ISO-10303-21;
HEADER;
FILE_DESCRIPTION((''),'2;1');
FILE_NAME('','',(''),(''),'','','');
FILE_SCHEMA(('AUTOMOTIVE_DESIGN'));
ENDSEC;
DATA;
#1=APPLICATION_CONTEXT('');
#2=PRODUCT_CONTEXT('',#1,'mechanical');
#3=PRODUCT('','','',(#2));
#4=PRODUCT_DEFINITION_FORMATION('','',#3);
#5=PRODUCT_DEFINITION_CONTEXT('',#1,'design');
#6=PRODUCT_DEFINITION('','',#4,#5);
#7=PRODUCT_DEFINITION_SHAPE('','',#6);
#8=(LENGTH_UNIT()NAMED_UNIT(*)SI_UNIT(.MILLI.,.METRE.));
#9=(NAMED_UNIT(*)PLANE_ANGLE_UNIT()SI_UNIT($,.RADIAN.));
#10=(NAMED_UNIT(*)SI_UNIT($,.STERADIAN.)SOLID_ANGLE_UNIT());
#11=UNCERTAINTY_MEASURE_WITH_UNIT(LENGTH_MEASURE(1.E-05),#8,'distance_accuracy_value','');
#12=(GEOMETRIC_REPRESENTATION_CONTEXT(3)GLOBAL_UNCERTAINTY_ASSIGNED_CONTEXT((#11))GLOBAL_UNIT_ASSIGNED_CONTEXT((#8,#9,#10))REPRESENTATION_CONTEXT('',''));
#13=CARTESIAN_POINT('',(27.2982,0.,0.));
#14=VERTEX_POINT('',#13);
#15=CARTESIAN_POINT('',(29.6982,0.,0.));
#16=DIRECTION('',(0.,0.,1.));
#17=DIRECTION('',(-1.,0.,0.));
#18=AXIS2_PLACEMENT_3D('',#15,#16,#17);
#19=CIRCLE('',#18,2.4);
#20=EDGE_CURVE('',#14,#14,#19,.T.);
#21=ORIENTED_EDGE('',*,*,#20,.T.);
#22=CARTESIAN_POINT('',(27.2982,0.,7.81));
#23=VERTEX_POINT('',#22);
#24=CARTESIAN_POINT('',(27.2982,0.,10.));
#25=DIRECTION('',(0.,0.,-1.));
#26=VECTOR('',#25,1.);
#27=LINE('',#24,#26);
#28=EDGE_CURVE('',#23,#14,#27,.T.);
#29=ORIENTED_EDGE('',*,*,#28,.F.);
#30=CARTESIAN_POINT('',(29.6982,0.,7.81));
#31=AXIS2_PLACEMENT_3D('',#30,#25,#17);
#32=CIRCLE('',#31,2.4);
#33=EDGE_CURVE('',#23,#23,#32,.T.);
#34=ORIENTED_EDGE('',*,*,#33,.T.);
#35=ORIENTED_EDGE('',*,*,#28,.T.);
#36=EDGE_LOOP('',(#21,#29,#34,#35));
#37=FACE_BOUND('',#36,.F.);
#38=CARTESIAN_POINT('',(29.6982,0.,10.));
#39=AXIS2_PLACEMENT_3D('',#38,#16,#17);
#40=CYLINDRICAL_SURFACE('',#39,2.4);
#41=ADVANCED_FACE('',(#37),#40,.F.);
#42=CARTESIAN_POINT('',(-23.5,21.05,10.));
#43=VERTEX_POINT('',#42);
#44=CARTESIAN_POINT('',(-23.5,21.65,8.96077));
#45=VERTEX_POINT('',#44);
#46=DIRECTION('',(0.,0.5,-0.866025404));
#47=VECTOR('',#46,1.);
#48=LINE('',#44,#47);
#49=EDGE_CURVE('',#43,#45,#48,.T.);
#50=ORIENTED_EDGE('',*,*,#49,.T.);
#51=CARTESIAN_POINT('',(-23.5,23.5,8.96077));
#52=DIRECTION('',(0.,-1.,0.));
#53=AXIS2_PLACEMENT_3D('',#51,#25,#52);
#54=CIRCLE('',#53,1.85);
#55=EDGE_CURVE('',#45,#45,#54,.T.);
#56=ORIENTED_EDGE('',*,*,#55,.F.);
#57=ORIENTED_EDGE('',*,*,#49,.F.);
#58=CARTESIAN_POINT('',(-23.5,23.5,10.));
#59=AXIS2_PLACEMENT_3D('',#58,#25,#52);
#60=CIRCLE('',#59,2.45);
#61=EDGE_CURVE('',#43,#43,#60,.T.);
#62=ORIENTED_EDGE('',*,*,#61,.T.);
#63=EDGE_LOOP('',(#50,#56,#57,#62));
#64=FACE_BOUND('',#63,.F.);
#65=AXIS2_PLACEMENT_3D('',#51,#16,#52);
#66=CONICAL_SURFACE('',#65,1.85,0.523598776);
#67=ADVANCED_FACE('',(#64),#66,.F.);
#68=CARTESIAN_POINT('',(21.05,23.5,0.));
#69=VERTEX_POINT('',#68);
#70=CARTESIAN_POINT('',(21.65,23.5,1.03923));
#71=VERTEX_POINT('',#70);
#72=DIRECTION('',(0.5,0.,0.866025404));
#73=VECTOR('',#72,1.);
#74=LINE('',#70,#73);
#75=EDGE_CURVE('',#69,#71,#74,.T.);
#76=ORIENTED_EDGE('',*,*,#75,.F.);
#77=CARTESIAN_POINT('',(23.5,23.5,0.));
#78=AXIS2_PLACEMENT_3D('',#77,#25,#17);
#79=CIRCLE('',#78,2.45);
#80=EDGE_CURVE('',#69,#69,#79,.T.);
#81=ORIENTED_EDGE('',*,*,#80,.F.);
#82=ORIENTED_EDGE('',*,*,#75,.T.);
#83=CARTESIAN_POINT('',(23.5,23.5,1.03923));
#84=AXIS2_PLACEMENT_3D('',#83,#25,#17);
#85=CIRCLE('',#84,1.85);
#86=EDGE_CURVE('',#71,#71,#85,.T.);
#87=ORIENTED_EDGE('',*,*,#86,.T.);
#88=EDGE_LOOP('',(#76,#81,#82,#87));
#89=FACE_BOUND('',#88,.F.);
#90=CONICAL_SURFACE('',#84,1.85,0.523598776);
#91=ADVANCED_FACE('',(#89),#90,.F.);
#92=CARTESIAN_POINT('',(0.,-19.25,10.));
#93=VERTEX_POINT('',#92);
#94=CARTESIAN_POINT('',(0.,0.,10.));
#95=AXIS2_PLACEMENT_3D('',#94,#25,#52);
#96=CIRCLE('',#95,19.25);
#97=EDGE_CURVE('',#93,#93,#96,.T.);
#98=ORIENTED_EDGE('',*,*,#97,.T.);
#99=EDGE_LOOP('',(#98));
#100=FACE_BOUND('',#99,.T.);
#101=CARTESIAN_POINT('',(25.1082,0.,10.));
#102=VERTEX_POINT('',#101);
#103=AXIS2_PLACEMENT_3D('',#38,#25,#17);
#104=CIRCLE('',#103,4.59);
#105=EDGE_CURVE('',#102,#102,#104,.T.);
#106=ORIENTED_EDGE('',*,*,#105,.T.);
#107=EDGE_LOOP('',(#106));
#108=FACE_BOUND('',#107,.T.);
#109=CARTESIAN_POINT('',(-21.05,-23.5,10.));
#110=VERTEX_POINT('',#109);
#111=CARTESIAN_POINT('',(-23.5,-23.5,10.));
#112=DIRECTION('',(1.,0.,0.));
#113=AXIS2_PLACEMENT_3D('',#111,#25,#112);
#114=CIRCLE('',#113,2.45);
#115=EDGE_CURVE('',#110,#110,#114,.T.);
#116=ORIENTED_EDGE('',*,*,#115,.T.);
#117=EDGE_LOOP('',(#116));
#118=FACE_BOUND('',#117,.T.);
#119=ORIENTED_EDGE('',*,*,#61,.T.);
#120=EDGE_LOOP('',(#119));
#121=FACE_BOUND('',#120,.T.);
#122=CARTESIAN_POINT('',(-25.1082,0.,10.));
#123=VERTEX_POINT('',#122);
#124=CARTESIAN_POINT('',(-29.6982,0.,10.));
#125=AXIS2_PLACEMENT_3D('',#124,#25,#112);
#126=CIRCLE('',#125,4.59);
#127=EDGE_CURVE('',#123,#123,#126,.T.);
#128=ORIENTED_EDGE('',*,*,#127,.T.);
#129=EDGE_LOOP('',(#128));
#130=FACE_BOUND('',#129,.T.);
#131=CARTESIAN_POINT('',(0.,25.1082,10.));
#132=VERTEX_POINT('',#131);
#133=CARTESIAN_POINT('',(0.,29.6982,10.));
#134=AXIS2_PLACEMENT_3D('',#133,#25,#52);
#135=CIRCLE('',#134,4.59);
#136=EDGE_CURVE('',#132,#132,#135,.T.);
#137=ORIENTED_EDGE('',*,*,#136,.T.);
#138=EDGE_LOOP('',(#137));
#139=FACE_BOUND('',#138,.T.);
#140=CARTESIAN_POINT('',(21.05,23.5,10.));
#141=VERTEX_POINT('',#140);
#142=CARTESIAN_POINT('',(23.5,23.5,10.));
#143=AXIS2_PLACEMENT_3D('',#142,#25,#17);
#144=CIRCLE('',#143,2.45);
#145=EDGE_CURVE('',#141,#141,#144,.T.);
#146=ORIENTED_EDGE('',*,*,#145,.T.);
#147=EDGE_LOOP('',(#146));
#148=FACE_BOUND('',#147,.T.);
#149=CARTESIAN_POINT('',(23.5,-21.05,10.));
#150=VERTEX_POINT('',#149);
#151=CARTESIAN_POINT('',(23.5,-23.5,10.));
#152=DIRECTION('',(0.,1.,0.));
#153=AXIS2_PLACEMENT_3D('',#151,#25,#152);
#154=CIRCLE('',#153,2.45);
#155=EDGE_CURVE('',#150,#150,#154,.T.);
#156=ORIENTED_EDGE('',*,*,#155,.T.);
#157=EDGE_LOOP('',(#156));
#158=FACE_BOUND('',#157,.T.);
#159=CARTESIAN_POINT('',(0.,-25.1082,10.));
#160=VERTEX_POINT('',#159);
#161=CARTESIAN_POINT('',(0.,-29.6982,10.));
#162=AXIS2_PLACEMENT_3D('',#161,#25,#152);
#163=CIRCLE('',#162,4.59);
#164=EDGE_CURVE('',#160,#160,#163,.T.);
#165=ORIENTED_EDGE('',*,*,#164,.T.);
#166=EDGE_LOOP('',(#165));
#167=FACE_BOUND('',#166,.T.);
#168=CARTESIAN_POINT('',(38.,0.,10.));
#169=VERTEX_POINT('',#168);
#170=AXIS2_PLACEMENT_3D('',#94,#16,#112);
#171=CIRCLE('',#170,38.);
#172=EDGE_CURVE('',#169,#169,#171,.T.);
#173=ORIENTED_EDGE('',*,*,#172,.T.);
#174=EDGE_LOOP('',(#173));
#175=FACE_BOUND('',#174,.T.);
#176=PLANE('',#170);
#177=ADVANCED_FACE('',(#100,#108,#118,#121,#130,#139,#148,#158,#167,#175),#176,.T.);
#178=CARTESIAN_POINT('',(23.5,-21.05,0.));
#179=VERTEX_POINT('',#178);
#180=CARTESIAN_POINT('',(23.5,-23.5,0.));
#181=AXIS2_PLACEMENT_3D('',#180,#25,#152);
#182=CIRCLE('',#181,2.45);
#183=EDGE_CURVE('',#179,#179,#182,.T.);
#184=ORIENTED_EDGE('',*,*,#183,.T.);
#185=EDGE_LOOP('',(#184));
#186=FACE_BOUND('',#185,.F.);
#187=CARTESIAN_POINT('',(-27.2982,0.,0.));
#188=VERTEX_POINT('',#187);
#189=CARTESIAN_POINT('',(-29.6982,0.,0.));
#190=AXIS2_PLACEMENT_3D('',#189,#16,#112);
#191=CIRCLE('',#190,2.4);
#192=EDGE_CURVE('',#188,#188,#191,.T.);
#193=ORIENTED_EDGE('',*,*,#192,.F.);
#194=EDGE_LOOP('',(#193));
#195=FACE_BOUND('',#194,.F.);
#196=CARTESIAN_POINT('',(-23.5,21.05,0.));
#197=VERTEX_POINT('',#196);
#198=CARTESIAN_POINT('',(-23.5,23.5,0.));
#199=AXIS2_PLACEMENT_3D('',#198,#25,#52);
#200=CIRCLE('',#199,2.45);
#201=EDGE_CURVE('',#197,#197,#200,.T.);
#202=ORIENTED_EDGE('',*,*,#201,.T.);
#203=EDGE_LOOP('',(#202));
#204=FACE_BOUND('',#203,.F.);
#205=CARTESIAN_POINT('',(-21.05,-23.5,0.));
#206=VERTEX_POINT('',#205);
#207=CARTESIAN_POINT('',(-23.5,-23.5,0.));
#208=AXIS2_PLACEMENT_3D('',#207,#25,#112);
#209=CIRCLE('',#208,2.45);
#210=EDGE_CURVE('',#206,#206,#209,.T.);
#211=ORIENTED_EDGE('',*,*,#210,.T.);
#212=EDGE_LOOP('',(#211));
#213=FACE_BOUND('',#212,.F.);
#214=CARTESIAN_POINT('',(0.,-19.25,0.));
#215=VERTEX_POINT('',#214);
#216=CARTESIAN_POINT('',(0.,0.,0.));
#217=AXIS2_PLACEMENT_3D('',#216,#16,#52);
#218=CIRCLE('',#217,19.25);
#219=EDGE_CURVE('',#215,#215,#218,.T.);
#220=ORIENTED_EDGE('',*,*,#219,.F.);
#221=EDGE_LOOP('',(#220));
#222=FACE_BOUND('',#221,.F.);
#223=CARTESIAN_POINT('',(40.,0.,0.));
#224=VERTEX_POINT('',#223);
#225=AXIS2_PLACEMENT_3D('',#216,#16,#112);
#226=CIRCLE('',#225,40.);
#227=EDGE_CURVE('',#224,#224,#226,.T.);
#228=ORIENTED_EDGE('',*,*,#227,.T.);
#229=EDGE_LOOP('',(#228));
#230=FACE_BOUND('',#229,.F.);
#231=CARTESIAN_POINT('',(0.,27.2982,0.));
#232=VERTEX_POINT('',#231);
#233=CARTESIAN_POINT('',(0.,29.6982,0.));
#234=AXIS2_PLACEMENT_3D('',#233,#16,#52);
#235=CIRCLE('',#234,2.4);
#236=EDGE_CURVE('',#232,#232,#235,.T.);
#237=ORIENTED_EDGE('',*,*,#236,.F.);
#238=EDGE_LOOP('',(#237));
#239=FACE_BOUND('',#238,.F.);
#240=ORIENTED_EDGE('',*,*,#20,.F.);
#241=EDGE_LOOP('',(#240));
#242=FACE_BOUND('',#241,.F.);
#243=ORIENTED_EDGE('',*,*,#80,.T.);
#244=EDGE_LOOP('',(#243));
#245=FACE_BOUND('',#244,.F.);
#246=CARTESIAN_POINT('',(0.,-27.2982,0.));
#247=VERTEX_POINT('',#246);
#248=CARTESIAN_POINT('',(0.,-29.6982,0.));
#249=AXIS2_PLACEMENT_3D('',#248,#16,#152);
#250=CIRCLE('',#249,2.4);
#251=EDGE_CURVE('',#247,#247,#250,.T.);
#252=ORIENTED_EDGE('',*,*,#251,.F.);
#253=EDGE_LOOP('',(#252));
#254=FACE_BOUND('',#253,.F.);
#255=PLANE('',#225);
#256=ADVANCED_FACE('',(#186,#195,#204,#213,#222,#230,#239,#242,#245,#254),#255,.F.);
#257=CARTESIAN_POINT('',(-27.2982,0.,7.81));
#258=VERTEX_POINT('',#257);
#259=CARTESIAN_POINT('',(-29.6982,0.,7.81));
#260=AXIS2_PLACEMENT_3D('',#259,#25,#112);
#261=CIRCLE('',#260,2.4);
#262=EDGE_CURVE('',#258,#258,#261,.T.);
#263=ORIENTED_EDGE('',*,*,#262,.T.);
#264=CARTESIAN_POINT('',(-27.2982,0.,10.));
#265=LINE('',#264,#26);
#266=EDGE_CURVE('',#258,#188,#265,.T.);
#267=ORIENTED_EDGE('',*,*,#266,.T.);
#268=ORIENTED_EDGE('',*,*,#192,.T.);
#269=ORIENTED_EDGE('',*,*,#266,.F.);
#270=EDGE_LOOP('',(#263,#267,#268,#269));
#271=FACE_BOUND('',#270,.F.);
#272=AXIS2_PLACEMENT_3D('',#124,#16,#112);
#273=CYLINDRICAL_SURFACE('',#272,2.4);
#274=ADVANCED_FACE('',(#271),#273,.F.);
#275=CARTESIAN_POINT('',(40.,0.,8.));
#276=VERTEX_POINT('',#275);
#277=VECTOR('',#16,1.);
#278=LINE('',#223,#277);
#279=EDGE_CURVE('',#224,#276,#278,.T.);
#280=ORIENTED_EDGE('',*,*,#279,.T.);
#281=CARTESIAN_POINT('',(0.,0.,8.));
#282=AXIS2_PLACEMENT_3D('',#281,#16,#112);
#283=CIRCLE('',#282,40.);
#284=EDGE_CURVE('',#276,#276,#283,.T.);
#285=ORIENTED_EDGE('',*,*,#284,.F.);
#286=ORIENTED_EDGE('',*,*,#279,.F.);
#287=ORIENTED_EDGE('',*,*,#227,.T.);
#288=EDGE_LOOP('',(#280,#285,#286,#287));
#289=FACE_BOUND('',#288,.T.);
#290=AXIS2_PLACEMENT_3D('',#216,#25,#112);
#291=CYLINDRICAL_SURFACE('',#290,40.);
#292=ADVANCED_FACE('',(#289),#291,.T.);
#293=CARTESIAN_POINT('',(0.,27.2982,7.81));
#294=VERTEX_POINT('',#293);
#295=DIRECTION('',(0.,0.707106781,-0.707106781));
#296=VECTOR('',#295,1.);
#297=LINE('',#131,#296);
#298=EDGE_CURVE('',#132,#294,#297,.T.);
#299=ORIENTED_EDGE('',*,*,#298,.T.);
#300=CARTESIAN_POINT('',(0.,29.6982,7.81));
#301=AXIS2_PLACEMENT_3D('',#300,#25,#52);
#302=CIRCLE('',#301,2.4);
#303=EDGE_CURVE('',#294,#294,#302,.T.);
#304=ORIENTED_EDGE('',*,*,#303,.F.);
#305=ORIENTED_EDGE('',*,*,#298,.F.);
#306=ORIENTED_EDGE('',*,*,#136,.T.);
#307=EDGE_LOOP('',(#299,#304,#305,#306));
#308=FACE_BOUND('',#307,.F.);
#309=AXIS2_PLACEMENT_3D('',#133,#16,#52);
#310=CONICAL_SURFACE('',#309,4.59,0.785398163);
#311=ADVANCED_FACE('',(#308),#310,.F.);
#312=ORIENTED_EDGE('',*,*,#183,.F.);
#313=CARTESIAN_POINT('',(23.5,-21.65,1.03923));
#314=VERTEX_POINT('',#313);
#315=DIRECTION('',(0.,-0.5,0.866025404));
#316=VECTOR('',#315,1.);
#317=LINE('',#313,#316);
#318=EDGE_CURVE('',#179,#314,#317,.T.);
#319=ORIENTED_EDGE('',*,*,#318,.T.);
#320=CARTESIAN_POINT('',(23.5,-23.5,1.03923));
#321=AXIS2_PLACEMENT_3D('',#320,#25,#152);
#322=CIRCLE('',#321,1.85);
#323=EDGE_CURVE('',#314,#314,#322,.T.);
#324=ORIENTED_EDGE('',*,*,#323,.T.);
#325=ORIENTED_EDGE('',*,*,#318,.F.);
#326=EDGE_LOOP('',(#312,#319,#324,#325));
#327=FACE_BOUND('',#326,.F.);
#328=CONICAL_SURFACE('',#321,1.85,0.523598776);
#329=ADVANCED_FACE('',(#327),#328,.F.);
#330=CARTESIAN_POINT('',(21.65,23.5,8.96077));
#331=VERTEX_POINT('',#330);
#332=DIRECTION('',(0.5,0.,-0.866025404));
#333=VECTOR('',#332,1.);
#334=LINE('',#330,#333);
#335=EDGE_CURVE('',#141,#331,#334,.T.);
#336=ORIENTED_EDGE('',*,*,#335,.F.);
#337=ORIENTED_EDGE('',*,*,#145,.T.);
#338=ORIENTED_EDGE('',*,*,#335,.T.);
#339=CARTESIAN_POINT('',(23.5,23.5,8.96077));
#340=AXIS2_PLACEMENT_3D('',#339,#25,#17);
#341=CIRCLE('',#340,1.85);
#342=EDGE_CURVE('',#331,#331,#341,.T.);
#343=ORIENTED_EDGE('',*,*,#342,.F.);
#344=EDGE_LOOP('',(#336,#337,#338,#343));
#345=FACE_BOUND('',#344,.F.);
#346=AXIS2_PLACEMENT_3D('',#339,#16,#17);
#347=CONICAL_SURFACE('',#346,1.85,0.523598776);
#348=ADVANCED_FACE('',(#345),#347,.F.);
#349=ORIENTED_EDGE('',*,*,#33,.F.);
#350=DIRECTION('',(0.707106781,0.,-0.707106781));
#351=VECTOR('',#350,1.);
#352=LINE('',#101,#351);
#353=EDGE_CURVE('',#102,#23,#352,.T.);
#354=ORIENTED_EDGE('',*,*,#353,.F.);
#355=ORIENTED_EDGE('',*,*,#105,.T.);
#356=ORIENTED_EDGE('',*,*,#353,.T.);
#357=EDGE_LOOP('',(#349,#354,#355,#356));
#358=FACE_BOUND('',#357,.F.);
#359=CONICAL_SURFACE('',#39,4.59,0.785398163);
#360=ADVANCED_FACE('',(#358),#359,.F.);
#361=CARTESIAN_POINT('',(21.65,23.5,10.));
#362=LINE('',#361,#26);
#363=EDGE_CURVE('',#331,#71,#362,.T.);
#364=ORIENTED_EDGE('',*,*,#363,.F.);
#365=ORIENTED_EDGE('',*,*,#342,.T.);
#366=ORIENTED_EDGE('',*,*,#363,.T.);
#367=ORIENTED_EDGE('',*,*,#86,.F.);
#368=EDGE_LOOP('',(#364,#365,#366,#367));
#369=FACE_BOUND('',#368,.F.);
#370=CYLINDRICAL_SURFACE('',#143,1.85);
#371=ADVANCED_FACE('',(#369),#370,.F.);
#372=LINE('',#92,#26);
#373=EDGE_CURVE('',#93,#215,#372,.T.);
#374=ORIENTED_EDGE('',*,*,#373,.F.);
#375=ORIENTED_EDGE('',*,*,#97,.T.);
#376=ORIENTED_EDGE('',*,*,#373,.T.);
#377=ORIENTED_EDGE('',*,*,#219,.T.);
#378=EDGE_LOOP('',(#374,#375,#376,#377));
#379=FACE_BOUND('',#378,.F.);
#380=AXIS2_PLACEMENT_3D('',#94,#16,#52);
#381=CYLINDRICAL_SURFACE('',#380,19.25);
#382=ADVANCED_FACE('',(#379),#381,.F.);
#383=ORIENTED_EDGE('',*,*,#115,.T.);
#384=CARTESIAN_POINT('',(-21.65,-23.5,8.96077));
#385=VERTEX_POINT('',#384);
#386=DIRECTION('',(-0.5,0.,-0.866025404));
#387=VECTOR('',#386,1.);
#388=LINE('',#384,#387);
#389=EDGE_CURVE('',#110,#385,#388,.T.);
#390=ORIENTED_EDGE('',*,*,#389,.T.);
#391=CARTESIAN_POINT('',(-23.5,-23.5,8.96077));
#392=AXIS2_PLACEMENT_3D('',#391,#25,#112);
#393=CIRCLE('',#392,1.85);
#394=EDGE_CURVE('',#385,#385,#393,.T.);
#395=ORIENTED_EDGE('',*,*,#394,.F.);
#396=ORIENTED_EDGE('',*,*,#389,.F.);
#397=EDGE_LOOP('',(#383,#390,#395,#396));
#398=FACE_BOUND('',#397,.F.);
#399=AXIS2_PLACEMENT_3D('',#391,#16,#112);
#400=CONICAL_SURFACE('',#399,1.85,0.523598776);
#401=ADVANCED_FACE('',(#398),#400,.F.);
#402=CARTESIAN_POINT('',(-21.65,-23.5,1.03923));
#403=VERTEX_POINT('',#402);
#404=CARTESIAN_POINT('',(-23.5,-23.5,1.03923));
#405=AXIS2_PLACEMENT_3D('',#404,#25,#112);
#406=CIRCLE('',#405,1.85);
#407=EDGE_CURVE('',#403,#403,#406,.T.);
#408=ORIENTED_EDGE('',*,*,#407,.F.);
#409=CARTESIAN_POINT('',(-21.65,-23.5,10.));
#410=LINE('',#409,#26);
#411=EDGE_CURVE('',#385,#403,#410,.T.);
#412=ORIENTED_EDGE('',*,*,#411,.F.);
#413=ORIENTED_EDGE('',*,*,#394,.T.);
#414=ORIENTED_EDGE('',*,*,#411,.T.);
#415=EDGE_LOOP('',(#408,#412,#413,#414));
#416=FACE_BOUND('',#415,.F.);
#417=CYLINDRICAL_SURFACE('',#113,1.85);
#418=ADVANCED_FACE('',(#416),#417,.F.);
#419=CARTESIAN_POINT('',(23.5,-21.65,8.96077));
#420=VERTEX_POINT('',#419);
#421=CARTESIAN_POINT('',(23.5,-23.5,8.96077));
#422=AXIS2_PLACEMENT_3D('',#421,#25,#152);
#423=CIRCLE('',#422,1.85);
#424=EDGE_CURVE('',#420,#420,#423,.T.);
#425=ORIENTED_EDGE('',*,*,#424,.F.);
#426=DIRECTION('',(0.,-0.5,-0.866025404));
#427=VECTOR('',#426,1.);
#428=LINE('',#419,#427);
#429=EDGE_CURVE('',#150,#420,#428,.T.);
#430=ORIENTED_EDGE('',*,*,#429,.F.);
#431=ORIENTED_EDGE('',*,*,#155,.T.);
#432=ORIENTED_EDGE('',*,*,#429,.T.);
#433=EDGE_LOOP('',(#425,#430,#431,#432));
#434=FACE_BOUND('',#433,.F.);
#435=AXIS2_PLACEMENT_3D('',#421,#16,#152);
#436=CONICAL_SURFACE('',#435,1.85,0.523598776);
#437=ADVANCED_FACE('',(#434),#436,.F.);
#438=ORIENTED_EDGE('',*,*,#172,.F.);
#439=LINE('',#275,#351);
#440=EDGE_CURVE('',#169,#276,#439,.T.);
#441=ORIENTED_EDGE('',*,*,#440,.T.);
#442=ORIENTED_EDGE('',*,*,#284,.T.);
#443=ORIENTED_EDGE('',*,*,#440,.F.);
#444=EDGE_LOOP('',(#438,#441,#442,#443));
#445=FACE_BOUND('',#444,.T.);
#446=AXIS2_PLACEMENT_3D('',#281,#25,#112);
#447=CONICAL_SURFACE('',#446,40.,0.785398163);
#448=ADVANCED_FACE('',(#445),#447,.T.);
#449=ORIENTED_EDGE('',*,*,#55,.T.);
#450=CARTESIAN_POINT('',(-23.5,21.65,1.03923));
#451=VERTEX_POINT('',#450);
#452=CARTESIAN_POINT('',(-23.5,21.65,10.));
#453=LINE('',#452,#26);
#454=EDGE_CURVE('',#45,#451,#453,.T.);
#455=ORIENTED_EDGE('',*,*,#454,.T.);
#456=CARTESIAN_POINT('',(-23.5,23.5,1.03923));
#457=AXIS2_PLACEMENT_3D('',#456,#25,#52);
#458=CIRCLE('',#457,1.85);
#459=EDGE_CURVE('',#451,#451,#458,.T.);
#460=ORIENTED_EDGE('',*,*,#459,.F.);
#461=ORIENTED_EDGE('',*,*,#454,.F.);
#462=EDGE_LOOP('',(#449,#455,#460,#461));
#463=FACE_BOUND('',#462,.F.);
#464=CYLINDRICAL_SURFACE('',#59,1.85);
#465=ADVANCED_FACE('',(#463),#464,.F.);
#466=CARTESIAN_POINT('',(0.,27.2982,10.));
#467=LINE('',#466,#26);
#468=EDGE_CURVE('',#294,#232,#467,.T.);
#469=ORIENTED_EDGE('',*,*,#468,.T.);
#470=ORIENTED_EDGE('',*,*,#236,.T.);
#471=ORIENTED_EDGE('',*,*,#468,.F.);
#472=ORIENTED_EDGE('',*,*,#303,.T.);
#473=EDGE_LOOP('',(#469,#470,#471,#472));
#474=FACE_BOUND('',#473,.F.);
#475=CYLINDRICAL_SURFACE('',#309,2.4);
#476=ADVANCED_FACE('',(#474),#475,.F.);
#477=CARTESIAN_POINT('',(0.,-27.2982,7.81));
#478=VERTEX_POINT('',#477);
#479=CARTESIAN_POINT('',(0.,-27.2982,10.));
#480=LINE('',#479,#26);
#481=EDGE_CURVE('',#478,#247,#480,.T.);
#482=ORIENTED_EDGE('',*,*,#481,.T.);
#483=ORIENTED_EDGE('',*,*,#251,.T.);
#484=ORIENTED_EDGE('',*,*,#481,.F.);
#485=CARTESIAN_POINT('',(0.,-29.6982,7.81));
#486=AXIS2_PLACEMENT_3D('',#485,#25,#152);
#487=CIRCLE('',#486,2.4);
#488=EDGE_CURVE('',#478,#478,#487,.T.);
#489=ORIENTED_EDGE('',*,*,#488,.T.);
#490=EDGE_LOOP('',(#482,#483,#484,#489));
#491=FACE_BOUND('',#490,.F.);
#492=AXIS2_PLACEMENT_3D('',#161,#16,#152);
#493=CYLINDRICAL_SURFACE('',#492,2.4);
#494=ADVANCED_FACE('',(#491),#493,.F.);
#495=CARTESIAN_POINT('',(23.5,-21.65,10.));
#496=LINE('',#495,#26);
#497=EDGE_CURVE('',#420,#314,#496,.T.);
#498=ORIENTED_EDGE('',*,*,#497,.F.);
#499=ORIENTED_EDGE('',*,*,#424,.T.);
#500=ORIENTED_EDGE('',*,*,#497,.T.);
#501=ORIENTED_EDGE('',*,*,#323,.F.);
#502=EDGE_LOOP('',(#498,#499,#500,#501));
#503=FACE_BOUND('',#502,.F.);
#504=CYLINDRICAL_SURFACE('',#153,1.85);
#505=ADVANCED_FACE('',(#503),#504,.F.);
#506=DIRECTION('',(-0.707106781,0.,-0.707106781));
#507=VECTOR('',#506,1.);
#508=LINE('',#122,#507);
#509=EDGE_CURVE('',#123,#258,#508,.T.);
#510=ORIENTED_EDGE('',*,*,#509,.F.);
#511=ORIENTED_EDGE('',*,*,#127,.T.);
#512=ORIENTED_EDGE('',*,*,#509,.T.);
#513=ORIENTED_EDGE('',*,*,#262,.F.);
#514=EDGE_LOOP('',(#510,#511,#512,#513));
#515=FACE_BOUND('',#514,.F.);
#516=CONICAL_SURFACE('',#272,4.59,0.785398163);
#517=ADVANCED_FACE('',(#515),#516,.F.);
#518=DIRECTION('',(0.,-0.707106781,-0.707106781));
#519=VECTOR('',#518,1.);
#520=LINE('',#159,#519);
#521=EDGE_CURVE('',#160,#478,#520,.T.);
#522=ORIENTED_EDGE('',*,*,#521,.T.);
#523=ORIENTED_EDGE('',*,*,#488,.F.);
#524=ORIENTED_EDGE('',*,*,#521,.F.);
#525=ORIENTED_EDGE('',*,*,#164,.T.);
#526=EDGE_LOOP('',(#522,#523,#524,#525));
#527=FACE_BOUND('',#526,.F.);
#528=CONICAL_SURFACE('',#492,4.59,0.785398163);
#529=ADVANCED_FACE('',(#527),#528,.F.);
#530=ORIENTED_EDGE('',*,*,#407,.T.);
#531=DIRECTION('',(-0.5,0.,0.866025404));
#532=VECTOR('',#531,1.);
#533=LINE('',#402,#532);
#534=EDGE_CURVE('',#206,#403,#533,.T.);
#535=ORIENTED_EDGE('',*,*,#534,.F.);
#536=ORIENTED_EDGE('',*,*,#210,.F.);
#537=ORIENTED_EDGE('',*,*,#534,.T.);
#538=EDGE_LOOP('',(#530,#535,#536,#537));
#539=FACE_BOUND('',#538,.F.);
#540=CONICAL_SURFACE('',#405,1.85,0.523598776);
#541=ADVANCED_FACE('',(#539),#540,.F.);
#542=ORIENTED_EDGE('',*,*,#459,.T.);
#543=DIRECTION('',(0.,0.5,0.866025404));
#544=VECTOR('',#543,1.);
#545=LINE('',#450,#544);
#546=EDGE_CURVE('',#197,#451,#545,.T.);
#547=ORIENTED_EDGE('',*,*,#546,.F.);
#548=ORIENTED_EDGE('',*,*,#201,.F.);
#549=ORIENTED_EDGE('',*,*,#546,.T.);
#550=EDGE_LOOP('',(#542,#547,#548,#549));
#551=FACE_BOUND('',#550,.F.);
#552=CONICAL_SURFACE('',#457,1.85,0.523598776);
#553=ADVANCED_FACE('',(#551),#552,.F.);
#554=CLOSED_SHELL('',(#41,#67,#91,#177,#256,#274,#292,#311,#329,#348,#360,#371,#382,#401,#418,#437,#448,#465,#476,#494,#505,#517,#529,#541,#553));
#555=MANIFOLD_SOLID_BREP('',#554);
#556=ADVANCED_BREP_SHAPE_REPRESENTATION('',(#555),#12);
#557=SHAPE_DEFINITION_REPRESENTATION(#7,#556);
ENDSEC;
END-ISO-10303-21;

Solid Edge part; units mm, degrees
sketch "Sketch1" plane through (0, 0, 0) normal (0, 0, 1) x (1, 0, 0)
  circle A0 centre (0, 0) radius 40
  dimension "D1" = 80
extrude "Protrusion1" add sketch "Sketch1" along normal blind 10
hole "main_hole" at (0, 0, 10) direction (0, 0, -1) diameter 38.5 end up to next
hole "Hole_2" at (0, 29.6982, 10) direction (0, 0, -1) diameter 4.8 end up to next countersink diameter 9.18 countersink angle 90
hole "Hole_3" at (-23.5, 23.5, 10) direction (0, 0, -1) diameter 3.7 depth 30 tip angle 118 start chamfer 0.6 start chamfer angle 30 end chamfer 0.6 end chamfer angle 30
chamfer "Chamfer_1" distance 2 angle 45 1 edges at (-40, 0, 10)
pattern_circular "Pattern1" count 4 over 360 about axis through (0, 0, 10) along (0, 0, 1) of "Hole_2", "Hole_3"
properties material "Polyethylene, low density"
